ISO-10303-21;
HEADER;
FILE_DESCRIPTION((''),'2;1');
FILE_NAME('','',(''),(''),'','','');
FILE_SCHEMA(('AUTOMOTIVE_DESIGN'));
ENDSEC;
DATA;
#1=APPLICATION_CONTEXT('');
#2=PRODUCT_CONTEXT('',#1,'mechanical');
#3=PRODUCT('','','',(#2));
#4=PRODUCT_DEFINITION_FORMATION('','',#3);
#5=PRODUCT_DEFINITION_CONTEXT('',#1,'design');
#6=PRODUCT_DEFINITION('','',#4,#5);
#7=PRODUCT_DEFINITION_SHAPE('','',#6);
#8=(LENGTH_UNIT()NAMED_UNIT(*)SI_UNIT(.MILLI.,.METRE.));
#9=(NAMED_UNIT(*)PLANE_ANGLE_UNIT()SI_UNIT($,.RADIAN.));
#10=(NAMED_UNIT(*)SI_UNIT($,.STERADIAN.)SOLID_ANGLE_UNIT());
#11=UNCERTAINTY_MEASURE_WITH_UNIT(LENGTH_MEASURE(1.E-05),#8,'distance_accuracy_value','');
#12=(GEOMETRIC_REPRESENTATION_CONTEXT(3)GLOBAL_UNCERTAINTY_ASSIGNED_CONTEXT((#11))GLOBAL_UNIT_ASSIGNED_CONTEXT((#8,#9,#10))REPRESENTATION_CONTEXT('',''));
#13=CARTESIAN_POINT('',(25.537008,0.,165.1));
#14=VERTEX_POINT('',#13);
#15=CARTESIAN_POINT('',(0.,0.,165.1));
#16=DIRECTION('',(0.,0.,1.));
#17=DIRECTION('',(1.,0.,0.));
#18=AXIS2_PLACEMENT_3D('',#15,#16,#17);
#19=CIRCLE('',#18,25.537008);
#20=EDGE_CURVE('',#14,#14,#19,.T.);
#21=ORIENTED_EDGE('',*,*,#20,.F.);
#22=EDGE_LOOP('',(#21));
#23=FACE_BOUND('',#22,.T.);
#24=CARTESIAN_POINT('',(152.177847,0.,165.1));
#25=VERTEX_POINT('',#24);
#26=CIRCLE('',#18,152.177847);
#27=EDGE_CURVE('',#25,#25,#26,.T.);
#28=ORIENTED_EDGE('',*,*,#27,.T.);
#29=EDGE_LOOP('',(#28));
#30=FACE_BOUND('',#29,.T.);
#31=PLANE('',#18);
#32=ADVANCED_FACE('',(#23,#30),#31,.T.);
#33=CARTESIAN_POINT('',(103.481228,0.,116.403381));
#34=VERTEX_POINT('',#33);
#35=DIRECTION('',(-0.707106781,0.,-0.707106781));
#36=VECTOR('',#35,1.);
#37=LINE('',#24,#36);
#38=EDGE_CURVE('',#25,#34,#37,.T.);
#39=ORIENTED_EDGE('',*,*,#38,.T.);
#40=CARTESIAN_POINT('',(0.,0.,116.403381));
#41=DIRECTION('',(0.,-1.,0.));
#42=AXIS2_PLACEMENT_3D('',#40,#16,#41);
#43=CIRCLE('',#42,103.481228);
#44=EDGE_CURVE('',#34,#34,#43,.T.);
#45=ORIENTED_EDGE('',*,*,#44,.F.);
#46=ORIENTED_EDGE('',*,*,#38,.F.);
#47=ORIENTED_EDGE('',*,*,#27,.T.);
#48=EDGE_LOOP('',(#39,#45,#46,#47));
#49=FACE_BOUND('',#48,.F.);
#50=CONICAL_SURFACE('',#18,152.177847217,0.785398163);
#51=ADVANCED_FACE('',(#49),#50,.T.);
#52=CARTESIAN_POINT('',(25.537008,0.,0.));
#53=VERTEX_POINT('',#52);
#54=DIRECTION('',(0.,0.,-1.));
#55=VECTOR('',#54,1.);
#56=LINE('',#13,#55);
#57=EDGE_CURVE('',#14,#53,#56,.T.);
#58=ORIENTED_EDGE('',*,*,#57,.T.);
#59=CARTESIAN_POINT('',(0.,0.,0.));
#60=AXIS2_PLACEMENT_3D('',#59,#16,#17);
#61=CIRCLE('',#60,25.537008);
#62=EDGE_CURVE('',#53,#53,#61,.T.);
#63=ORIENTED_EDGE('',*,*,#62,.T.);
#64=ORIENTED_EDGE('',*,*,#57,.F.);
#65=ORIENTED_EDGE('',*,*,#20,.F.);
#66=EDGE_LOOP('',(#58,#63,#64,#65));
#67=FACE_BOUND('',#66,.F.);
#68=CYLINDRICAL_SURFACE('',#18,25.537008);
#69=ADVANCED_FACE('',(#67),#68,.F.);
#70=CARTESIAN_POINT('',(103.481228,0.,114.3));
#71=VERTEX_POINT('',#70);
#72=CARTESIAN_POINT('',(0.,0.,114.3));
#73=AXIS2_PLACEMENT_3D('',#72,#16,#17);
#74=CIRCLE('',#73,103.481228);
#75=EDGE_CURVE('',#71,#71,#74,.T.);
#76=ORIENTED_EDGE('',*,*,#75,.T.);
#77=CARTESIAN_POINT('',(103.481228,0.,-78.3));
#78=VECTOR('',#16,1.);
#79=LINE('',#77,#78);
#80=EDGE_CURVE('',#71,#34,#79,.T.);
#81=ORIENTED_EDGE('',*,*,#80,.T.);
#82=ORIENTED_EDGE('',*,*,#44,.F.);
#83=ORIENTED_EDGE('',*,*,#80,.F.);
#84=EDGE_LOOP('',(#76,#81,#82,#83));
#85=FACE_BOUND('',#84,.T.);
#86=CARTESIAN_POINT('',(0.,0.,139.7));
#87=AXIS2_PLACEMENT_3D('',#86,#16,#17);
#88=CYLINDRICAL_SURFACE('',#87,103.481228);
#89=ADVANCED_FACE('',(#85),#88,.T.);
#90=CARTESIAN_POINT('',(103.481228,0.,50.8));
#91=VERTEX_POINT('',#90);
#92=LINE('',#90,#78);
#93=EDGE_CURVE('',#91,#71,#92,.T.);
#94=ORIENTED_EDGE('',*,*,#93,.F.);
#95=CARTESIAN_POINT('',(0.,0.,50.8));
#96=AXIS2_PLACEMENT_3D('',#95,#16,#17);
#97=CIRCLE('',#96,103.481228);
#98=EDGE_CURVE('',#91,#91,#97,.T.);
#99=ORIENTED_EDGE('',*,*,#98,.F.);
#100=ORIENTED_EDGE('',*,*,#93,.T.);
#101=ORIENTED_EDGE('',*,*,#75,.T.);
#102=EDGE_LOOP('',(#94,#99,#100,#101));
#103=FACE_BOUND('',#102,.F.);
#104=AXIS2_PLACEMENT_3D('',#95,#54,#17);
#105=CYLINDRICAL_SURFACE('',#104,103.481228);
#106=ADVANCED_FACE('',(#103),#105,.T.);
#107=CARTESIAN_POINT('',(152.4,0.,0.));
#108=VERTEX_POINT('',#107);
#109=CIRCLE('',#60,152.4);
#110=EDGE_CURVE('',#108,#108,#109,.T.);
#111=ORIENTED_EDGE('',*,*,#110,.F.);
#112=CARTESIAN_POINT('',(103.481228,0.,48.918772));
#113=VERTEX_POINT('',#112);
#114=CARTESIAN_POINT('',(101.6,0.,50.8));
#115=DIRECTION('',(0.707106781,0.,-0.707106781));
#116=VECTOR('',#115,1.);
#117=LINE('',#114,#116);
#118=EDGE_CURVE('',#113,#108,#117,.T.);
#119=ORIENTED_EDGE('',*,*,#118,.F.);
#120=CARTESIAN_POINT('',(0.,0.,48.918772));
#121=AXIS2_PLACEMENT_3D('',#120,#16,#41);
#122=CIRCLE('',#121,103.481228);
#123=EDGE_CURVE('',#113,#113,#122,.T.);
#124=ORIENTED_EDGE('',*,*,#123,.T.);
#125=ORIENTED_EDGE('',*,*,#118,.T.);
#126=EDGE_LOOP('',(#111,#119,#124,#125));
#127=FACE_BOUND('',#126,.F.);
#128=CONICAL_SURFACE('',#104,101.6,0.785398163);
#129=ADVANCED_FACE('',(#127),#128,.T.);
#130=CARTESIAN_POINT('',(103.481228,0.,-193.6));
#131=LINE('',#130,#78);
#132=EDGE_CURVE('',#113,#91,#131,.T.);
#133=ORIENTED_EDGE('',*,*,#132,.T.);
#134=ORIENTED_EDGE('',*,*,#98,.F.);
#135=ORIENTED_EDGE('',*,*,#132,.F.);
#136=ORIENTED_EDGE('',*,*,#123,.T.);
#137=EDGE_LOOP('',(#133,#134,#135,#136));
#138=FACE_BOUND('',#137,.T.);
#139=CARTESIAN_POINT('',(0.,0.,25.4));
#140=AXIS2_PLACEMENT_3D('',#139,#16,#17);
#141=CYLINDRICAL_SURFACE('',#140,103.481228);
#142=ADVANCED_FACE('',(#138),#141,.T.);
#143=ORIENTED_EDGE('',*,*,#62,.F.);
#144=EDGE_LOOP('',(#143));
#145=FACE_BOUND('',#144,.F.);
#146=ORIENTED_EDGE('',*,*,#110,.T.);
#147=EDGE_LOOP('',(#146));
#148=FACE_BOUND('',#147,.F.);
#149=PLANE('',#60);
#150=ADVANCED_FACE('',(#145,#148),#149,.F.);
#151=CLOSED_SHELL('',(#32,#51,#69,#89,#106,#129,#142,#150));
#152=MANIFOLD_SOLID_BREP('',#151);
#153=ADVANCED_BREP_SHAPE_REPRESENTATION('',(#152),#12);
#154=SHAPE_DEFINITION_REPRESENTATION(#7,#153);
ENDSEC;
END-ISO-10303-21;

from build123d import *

# Parameters (mm, degrees)
F0_R        = 152.4
F1_DEPTH    = 50.8
F2_R        = 103.4812283395
F3_DEPTH    = 63.5
F5_R        = 152.1778472169
F6_DEPTH    = 50.8
F7_S5_R     = 103.4812283395
F7_T6_DEPTH = 218
F8_S5_R     = 103.4812283395
F8_T6_DEPTH = 219
F9_R        = 25.5370078958
F10_DEPTH   = 203.2


# Not quite as in the source:
# - a fillet or chamfer that OpenCascade refuses, or shapes differently, is made with other operations: its cross-section is extruded or revolved along the edge and cut away or added


with BuildPart() as f1:
    # F0 (on Top) → F1 (new body)
    with BuildSketch(Plane.XY):
        Circle(F0_R)
    extrude(amount=F1_DEPTH)

    # F2 (on face) → F3 (join)
    with BuildSketch(Plane.XY.offset(50.8)):
        Circle(F2_R)
    extrude(amount=F3_DEPTH)

    # F5 (on face) → F6 (join)
    with BuildSketch(Plane.XY.offset(114.3)):
        Circle(F5_R)
    extrude(amount=F6_DEPTH)

    # F7: chamfer of 50.8 on 1 edges, made by hand


with BuildPart() as f7_tool2:
    # F7_s3 → F7_t4 (revolve)
    with BuildSketch(Plane.XZ):
        Polygon((152.1778472169, 165.1), (101.3778472169, 114.3), (152.1778472169, 114.3), align=None)
    revolve(axis=Axis((0, 0, 114.3), (0, 0, 1)))

    # F7_s5 → F7_t6 (cut, symmetric)
    with BuildSketch(Plane.XY.offset(139.7)):
        Circle(F7_S5_R)
    extrude(amount=F7_T6_DEPTH, both=True, mode=Mode.SUBTRACT)


with BuildPart() as f1_1:
    add(f1.part)

    # F7_t1: cut F7_tool2
    add(f7_tool2.part, mode=Mode.SUBTRACT)

    # F8: chamfer of 50.8 on 1 edges, made by hand


with BuildPart() as f8_tool2:
    # F8_s3 → F8_t4 (revolve)
    with BuildSketch(Plane.XZ):
        Polygon((101.6, 50.8), (152.4, 0), (152.4, 50.8), align=None)
    revolve(axis=Axis((0, 0, 50.8), (0, 0, 1)))

    # F8_s5 → F8_t6 (cut, symmetric)
    with BuildSketch(Plane.XY.offset(25.4)):
        Circle(F8_S5_R)
    extrude(amount=F8_T6_DEPTH, both=True, mode=Mode.SUBTRACT)


with BuildPart() as f1_2:
    add(f1_1.part)

    # F8_t1: cut F8_tool2
    add(f8_tool2.part, mode=Mode.SUBTRACT)

    # F9 (on face) → F10 (cut)
    with BuildSketch(Plane.XY.offset(165.1)):
        Circle(F9_R)
    extrude(amount=-F10_DEPTH, mode=Mode.SUBTRACT)


solid = f1_2.part
